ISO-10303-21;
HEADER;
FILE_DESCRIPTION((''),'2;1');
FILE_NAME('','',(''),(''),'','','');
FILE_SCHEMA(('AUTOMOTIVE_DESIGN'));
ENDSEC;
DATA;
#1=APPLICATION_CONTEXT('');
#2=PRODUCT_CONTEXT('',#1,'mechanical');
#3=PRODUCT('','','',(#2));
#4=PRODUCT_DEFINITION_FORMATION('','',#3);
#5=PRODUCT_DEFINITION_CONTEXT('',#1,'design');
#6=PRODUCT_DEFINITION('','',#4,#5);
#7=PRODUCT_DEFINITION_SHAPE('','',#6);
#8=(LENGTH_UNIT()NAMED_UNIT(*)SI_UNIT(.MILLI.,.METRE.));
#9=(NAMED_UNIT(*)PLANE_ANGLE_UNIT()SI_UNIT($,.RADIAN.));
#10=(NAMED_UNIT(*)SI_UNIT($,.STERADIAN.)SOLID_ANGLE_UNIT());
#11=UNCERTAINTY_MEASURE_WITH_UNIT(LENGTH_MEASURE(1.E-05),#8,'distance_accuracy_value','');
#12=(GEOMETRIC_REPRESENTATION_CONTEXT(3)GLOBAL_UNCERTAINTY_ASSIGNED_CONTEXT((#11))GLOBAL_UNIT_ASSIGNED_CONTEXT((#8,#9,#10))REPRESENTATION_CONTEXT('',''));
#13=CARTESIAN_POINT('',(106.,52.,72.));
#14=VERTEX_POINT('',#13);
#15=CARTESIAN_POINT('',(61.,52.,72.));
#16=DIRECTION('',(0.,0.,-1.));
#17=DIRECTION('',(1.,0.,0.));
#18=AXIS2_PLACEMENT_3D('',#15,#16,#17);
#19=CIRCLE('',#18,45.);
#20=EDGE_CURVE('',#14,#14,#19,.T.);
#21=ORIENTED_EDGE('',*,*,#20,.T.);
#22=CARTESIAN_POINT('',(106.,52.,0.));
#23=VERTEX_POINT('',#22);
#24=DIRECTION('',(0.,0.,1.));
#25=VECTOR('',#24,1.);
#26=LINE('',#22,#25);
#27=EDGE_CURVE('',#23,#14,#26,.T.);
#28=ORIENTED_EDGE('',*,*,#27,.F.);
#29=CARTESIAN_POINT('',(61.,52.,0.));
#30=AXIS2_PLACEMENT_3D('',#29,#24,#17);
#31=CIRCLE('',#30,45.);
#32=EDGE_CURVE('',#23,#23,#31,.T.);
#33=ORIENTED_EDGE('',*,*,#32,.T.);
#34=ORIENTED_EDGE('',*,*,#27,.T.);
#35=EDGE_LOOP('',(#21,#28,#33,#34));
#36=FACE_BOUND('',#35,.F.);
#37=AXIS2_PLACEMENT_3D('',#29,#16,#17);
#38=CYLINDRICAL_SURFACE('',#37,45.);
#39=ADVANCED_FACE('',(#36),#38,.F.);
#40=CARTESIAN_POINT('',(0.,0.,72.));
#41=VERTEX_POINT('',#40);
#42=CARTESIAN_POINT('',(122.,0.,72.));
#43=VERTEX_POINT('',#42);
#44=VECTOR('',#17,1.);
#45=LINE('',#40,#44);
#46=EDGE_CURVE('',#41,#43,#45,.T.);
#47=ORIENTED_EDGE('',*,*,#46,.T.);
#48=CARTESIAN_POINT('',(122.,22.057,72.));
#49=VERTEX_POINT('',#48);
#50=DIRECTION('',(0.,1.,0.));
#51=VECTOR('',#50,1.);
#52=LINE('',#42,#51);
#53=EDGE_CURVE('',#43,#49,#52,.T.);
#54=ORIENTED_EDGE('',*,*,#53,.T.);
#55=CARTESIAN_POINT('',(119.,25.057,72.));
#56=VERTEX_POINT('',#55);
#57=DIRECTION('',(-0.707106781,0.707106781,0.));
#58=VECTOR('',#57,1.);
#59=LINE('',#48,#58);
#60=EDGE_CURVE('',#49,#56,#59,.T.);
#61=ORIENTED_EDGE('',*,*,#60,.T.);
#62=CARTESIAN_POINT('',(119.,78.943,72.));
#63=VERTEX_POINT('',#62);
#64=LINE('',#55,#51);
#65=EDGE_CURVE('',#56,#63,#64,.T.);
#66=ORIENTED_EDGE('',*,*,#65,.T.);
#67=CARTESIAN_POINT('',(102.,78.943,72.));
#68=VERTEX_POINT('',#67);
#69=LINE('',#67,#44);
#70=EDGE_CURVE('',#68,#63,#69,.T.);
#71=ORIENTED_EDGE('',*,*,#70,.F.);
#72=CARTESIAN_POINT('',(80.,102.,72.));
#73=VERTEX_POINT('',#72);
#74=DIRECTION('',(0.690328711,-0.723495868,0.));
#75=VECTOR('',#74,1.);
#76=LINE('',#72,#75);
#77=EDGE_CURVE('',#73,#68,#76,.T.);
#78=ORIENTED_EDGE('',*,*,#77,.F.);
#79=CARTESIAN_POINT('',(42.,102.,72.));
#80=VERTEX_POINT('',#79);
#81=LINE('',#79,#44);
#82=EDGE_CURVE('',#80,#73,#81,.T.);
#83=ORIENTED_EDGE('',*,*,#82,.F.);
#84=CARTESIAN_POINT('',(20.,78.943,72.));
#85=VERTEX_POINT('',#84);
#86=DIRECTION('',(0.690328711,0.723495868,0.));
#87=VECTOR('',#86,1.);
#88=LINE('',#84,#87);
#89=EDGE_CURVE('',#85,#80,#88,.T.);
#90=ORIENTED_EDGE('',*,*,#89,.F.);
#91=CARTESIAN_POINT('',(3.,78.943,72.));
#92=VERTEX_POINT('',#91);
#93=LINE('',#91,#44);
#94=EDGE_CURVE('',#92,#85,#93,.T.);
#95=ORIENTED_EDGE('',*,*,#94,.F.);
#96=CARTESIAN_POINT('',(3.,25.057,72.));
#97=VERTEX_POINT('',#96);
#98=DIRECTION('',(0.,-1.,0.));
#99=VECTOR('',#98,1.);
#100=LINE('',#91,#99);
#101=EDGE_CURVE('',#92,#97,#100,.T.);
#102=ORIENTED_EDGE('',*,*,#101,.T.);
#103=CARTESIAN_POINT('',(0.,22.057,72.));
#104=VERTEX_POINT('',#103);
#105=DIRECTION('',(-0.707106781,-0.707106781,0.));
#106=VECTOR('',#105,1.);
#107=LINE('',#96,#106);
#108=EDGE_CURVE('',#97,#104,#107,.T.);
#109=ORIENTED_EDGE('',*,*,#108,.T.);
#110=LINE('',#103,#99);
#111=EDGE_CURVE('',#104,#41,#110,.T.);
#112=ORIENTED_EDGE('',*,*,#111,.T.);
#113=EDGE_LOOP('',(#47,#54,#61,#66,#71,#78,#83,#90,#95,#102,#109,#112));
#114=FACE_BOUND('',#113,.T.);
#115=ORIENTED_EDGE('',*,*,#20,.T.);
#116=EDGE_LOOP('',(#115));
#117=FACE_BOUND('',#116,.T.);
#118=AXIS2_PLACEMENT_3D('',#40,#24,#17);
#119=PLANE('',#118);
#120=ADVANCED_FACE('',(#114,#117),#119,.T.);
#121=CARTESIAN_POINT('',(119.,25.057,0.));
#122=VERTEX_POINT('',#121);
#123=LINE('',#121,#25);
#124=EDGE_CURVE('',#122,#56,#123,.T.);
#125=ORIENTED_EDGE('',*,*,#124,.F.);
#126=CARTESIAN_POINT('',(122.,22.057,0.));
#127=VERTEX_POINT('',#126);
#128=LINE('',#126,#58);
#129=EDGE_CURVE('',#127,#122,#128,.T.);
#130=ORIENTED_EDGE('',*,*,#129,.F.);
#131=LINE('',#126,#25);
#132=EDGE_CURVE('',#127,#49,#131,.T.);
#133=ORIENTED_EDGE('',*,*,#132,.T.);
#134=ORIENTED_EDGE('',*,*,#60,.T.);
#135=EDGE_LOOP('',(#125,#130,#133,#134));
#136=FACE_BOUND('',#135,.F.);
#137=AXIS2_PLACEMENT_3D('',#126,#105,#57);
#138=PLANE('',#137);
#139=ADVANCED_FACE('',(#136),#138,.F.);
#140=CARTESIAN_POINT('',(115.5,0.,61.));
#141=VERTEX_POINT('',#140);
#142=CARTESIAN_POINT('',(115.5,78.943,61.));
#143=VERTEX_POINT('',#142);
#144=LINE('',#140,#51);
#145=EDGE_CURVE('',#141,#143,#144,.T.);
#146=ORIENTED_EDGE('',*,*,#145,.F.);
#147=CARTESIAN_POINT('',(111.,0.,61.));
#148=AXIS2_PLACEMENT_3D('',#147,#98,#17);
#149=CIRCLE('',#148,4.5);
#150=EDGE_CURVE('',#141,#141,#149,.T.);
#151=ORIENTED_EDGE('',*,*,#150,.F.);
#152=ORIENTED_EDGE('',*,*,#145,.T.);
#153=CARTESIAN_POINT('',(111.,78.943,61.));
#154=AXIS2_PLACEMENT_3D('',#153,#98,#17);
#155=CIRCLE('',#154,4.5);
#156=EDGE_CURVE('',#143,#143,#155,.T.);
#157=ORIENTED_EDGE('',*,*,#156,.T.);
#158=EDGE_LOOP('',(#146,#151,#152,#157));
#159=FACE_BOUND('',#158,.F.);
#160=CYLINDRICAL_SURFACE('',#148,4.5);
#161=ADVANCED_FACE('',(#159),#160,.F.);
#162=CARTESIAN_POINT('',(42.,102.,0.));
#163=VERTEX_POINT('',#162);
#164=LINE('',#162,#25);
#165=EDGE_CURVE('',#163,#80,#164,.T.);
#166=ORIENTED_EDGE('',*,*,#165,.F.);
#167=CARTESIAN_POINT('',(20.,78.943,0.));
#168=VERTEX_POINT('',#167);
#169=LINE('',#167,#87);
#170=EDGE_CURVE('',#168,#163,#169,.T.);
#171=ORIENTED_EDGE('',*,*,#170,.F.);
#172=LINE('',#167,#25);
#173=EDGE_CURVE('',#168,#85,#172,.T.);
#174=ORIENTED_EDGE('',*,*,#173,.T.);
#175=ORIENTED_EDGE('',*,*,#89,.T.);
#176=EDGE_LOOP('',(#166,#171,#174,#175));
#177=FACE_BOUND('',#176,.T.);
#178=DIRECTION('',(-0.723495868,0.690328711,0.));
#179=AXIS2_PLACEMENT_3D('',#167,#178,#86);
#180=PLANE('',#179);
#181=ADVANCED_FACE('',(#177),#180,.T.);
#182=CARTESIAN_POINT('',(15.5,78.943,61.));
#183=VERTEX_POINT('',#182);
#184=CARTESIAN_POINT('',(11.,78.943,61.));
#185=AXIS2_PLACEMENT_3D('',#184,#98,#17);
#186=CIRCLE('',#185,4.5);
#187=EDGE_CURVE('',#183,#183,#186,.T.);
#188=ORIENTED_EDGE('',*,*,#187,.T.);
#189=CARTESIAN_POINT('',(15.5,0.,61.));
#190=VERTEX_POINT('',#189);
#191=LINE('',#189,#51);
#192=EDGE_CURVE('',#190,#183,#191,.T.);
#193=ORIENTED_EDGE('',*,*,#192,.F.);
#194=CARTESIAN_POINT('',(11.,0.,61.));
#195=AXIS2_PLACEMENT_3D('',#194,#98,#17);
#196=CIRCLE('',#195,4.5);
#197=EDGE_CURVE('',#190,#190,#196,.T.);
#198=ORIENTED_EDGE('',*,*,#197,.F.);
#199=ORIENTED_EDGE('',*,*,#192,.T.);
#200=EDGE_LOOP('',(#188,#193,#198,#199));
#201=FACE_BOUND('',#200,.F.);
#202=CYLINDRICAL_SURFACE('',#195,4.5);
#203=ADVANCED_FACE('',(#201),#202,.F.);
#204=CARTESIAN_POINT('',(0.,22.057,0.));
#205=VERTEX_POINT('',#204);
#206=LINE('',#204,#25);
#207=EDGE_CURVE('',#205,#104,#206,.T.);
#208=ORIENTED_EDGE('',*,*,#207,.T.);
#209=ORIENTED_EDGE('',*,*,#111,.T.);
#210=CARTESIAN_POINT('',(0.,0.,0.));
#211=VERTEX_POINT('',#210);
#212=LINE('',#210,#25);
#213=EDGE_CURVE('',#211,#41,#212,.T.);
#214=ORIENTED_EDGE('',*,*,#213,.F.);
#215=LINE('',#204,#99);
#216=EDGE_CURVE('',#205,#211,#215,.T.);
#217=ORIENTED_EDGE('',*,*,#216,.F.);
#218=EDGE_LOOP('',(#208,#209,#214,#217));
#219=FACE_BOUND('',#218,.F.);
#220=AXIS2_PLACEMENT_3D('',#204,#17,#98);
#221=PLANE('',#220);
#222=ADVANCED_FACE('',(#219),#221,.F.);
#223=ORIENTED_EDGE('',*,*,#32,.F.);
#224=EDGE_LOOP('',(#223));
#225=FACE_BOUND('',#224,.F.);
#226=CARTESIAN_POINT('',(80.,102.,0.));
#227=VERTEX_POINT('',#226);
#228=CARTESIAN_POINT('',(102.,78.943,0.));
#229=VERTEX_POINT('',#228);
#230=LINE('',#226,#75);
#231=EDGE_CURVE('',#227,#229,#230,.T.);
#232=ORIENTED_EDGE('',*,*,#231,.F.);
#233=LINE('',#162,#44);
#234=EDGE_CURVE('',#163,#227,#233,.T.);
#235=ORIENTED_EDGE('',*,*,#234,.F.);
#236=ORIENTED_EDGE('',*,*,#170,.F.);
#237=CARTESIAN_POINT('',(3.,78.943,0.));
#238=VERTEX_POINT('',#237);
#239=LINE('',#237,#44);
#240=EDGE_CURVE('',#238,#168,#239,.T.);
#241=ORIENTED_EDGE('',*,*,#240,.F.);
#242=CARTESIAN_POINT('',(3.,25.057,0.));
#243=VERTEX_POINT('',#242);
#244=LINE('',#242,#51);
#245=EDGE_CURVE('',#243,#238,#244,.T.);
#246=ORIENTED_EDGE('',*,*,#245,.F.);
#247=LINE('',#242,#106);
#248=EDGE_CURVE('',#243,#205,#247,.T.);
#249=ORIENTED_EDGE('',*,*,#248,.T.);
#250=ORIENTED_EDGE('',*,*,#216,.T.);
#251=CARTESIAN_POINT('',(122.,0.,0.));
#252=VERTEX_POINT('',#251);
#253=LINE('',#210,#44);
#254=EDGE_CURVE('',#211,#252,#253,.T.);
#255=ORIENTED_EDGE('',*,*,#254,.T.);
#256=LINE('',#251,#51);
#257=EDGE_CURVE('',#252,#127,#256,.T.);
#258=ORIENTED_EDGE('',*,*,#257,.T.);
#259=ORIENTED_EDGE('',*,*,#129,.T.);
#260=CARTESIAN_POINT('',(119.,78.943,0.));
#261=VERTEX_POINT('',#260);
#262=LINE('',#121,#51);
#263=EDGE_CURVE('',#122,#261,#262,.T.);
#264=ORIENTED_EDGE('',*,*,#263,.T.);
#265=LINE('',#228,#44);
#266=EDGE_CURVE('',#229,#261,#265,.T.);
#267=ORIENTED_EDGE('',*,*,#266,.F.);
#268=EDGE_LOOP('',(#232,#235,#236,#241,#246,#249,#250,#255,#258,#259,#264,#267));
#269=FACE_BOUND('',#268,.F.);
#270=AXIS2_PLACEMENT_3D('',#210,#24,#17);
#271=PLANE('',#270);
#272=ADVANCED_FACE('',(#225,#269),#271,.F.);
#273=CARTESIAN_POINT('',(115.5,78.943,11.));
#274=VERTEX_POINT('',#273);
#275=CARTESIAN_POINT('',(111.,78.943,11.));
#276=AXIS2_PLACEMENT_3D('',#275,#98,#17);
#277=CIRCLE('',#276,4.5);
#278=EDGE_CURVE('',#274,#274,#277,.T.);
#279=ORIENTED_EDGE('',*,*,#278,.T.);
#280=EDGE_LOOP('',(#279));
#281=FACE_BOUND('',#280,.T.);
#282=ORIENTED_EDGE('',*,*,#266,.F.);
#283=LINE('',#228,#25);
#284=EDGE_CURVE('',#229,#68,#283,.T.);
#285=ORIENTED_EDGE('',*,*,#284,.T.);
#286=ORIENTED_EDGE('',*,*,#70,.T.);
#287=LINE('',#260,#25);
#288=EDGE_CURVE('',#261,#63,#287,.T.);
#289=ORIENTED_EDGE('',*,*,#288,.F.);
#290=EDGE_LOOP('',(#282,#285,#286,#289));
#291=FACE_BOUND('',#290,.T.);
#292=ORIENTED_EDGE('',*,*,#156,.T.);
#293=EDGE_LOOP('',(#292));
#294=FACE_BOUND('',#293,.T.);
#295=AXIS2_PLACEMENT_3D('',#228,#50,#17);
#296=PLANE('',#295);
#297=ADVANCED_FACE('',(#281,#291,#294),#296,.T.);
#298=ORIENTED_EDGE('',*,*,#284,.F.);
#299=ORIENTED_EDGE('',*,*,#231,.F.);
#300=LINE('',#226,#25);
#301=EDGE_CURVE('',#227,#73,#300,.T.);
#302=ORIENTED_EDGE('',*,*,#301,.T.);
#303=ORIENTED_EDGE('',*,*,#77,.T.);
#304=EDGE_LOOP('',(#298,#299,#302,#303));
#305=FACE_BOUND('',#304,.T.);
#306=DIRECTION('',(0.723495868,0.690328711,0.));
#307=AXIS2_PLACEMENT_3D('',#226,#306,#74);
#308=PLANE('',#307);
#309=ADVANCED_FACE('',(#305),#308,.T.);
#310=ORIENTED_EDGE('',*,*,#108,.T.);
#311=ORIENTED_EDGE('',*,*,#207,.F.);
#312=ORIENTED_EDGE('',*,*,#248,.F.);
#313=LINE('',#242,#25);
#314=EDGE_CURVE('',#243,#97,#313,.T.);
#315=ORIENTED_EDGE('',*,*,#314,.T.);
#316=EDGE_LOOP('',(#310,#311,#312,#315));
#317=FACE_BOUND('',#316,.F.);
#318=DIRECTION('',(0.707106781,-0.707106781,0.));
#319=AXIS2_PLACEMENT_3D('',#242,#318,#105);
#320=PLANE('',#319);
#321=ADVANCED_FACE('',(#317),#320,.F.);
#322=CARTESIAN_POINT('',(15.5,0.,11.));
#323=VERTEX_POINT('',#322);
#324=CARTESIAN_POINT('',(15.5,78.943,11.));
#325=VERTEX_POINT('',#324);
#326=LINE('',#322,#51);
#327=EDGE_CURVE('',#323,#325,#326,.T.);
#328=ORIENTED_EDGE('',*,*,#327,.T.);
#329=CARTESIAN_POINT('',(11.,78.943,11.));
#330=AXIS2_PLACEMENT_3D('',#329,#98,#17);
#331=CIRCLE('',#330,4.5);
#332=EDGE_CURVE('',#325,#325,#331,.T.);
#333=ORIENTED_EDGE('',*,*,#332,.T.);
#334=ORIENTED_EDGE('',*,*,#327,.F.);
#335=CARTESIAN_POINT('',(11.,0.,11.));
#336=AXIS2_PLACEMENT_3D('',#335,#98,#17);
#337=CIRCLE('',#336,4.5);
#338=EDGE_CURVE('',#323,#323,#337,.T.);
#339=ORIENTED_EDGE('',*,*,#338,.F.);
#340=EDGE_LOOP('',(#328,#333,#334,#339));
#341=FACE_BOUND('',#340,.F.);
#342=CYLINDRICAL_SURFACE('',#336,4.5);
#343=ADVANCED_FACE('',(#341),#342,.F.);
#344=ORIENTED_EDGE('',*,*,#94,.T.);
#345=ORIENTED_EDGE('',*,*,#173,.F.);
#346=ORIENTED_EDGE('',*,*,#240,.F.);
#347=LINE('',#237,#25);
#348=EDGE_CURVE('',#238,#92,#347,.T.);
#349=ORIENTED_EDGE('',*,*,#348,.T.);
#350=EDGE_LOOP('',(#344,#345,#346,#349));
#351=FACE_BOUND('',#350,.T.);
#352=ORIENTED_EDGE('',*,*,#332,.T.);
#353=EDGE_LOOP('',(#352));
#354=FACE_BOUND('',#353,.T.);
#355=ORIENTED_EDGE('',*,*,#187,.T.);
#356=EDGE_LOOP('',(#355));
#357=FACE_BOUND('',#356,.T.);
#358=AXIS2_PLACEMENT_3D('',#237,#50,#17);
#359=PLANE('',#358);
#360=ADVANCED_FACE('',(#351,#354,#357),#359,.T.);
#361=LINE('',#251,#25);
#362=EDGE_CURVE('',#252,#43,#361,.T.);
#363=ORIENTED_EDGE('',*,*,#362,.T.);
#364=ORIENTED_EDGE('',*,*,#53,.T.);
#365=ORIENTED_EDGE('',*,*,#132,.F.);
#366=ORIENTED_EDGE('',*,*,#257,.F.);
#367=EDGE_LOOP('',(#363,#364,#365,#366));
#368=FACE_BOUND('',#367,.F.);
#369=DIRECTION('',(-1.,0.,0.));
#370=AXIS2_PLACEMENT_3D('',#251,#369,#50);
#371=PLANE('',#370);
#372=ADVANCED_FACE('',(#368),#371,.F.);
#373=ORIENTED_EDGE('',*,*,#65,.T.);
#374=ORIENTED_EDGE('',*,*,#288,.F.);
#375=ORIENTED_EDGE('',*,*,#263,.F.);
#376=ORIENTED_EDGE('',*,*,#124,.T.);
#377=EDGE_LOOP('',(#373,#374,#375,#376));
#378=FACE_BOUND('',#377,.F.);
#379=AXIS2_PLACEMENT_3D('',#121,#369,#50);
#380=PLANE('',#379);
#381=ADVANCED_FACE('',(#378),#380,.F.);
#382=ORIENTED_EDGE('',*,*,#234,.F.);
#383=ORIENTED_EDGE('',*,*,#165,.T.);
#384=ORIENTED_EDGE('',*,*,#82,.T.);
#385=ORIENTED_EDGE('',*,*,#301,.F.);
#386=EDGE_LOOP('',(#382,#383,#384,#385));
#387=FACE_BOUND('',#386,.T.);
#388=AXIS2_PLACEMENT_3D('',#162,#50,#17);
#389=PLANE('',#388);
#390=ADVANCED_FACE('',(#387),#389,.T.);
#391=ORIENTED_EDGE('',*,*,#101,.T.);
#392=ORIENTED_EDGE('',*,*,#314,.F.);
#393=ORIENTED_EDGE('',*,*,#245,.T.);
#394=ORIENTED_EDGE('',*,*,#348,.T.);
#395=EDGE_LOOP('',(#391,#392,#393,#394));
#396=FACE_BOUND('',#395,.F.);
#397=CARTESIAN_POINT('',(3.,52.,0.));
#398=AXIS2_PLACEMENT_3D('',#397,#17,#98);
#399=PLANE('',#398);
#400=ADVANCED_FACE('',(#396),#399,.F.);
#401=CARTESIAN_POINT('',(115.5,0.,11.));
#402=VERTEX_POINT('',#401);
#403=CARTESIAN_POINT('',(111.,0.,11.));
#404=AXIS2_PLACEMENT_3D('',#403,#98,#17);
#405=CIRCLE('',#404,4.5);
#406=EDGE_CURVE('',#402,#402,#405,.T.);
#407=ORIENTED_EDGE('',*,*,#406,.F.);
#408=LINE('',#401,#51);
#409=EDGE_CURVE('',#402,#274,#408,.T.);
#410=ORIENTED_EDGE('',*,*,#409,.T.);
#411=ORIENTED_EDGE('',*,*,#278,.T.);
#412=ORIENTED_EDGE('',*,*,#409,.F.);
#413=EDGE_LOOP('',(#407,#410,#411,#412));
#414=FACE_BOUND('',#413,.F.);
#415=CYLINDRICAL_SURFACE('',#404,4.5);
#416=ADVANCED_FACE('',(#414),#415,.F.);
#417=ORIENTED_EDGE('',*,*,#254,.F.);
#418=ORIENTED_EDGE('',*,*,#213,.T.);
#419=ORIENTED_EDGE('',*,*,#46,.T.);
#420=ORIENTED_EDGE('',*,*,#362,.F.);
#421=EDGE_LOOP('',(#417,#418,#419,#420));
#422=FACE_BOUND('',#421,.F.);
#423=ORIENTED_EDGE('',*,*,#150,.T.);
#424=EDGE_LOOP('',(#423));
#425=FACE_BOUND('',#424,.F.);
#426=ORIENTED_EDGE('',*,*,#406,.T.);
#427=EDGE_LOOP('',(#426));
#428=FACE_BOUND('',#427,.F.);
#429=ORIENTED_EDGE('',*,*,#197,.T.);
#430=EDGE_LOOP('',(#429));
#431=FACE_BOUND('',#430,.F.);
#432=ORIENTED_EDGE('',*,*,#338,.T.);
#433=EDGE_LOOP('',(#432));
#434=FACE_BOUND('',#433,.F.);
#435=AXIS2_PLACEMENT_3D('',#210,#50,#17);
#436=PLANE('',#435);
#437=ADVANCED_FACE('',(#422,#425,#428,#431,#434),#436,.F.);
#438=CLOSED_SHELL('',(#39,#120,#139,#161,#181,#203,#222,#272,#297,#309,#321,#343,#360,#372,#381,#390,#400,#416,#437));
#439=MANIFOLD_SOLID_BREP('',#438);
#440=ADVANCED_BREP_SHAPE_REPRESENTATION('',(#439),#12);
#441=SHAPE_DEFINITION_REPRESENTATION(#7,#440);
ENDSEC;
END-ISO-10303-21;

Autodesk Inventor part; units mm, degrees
ref_plane "YZ Plane" through (0, 0, 0) normal (1, 0, 0) x (0, 1, 0)
ref_plane "XZ Plane" through (0, 0, 0) normal (0, 1, 0) x (-1, 0, 0)
ref_plane "XY Plane" through (0, 0, 0) normal (0, 0, 1) x (1, 0, 0)
sketch "Sketch1" plane through (0, 0, 0) normal (0, 0, 1) x (1, 0, 0)
  line L0 (0, 0) -> (122, 0)
  circle A0 centre (61, 52) radius 45
  line L1 (3, 78.943) -> (20, 78.943)
  line L2 (20, 78.943) -> (42, 102)
  line L3 (42, 102) -> (80, 102)
  line L4 (80, 102) -> (102, 78.943)
  line L5 (102, 78.943) -> (119, 78.943)
  line L6 (3, 25.057) -> (0, 22.057)
  line L7 (0, 22.057) -> (0, 0)
  line L8 (122, 0) -> (122, 22.057)
  line L9 (122, 22.057) -> (119, 25.057)
  line L10 (119, 25.057) -> (119, 78.943)
  line L11 (16, 52) -> (3, 52)
  line L12 (3, 52) -> (3, 25.057)
  line L13 (3, 52) -> (3, 78.943)
  point P0 (61, 0)
  point P1 (61, 102)
  dimension "d3" = 90
  dimension "d0" = 79
  dimension "d1" = 122
  dimension "d2" = 52
  dimension "d4" = 17
  dimension "d5" = 38
  dimension "d6" = 102
  dimension "d7" = 116
  dimension "d8" = 135
extrude "Extrusion1" add sketch "Sketch1" along normal blind 72
sketch "Sketch2" plane through (0, 0, 0) normal (0, -1, 0) x (1, 0, 0)
  line L0 (11, 11) -> (111, 11) construction
  line L1 (111, 11) -> (111, 61) construction
  line L2 (111, 61) -> (11, 61) construction
  line L3 (11, 61) -> (11, 11) construction
  circle A0 centre (11, 11) radius 4.5
  circle A1 centre (111, 11) radius 4.5
  circle A2 centre (111, 61) radius 4.5
  circle A3 centre (11, 61) radius 4.5
  line L4 (0, 72) -> (122, 72) construction
  line L5 (0, 0) -> (0, 72) construction
  point P0 (61, 61)
  point P1 (61, 72)
  point P2 (11, 36)
  point P3 (0, 36)
  dimension "d11" = 100
  dimension "d12" = 50
  dimension "d13" = 9
extrude "Extrusion2" cut sketch "Sketch2" against normal up to surface (78.943 mm away)
properties part number "Spindle_Holder"
